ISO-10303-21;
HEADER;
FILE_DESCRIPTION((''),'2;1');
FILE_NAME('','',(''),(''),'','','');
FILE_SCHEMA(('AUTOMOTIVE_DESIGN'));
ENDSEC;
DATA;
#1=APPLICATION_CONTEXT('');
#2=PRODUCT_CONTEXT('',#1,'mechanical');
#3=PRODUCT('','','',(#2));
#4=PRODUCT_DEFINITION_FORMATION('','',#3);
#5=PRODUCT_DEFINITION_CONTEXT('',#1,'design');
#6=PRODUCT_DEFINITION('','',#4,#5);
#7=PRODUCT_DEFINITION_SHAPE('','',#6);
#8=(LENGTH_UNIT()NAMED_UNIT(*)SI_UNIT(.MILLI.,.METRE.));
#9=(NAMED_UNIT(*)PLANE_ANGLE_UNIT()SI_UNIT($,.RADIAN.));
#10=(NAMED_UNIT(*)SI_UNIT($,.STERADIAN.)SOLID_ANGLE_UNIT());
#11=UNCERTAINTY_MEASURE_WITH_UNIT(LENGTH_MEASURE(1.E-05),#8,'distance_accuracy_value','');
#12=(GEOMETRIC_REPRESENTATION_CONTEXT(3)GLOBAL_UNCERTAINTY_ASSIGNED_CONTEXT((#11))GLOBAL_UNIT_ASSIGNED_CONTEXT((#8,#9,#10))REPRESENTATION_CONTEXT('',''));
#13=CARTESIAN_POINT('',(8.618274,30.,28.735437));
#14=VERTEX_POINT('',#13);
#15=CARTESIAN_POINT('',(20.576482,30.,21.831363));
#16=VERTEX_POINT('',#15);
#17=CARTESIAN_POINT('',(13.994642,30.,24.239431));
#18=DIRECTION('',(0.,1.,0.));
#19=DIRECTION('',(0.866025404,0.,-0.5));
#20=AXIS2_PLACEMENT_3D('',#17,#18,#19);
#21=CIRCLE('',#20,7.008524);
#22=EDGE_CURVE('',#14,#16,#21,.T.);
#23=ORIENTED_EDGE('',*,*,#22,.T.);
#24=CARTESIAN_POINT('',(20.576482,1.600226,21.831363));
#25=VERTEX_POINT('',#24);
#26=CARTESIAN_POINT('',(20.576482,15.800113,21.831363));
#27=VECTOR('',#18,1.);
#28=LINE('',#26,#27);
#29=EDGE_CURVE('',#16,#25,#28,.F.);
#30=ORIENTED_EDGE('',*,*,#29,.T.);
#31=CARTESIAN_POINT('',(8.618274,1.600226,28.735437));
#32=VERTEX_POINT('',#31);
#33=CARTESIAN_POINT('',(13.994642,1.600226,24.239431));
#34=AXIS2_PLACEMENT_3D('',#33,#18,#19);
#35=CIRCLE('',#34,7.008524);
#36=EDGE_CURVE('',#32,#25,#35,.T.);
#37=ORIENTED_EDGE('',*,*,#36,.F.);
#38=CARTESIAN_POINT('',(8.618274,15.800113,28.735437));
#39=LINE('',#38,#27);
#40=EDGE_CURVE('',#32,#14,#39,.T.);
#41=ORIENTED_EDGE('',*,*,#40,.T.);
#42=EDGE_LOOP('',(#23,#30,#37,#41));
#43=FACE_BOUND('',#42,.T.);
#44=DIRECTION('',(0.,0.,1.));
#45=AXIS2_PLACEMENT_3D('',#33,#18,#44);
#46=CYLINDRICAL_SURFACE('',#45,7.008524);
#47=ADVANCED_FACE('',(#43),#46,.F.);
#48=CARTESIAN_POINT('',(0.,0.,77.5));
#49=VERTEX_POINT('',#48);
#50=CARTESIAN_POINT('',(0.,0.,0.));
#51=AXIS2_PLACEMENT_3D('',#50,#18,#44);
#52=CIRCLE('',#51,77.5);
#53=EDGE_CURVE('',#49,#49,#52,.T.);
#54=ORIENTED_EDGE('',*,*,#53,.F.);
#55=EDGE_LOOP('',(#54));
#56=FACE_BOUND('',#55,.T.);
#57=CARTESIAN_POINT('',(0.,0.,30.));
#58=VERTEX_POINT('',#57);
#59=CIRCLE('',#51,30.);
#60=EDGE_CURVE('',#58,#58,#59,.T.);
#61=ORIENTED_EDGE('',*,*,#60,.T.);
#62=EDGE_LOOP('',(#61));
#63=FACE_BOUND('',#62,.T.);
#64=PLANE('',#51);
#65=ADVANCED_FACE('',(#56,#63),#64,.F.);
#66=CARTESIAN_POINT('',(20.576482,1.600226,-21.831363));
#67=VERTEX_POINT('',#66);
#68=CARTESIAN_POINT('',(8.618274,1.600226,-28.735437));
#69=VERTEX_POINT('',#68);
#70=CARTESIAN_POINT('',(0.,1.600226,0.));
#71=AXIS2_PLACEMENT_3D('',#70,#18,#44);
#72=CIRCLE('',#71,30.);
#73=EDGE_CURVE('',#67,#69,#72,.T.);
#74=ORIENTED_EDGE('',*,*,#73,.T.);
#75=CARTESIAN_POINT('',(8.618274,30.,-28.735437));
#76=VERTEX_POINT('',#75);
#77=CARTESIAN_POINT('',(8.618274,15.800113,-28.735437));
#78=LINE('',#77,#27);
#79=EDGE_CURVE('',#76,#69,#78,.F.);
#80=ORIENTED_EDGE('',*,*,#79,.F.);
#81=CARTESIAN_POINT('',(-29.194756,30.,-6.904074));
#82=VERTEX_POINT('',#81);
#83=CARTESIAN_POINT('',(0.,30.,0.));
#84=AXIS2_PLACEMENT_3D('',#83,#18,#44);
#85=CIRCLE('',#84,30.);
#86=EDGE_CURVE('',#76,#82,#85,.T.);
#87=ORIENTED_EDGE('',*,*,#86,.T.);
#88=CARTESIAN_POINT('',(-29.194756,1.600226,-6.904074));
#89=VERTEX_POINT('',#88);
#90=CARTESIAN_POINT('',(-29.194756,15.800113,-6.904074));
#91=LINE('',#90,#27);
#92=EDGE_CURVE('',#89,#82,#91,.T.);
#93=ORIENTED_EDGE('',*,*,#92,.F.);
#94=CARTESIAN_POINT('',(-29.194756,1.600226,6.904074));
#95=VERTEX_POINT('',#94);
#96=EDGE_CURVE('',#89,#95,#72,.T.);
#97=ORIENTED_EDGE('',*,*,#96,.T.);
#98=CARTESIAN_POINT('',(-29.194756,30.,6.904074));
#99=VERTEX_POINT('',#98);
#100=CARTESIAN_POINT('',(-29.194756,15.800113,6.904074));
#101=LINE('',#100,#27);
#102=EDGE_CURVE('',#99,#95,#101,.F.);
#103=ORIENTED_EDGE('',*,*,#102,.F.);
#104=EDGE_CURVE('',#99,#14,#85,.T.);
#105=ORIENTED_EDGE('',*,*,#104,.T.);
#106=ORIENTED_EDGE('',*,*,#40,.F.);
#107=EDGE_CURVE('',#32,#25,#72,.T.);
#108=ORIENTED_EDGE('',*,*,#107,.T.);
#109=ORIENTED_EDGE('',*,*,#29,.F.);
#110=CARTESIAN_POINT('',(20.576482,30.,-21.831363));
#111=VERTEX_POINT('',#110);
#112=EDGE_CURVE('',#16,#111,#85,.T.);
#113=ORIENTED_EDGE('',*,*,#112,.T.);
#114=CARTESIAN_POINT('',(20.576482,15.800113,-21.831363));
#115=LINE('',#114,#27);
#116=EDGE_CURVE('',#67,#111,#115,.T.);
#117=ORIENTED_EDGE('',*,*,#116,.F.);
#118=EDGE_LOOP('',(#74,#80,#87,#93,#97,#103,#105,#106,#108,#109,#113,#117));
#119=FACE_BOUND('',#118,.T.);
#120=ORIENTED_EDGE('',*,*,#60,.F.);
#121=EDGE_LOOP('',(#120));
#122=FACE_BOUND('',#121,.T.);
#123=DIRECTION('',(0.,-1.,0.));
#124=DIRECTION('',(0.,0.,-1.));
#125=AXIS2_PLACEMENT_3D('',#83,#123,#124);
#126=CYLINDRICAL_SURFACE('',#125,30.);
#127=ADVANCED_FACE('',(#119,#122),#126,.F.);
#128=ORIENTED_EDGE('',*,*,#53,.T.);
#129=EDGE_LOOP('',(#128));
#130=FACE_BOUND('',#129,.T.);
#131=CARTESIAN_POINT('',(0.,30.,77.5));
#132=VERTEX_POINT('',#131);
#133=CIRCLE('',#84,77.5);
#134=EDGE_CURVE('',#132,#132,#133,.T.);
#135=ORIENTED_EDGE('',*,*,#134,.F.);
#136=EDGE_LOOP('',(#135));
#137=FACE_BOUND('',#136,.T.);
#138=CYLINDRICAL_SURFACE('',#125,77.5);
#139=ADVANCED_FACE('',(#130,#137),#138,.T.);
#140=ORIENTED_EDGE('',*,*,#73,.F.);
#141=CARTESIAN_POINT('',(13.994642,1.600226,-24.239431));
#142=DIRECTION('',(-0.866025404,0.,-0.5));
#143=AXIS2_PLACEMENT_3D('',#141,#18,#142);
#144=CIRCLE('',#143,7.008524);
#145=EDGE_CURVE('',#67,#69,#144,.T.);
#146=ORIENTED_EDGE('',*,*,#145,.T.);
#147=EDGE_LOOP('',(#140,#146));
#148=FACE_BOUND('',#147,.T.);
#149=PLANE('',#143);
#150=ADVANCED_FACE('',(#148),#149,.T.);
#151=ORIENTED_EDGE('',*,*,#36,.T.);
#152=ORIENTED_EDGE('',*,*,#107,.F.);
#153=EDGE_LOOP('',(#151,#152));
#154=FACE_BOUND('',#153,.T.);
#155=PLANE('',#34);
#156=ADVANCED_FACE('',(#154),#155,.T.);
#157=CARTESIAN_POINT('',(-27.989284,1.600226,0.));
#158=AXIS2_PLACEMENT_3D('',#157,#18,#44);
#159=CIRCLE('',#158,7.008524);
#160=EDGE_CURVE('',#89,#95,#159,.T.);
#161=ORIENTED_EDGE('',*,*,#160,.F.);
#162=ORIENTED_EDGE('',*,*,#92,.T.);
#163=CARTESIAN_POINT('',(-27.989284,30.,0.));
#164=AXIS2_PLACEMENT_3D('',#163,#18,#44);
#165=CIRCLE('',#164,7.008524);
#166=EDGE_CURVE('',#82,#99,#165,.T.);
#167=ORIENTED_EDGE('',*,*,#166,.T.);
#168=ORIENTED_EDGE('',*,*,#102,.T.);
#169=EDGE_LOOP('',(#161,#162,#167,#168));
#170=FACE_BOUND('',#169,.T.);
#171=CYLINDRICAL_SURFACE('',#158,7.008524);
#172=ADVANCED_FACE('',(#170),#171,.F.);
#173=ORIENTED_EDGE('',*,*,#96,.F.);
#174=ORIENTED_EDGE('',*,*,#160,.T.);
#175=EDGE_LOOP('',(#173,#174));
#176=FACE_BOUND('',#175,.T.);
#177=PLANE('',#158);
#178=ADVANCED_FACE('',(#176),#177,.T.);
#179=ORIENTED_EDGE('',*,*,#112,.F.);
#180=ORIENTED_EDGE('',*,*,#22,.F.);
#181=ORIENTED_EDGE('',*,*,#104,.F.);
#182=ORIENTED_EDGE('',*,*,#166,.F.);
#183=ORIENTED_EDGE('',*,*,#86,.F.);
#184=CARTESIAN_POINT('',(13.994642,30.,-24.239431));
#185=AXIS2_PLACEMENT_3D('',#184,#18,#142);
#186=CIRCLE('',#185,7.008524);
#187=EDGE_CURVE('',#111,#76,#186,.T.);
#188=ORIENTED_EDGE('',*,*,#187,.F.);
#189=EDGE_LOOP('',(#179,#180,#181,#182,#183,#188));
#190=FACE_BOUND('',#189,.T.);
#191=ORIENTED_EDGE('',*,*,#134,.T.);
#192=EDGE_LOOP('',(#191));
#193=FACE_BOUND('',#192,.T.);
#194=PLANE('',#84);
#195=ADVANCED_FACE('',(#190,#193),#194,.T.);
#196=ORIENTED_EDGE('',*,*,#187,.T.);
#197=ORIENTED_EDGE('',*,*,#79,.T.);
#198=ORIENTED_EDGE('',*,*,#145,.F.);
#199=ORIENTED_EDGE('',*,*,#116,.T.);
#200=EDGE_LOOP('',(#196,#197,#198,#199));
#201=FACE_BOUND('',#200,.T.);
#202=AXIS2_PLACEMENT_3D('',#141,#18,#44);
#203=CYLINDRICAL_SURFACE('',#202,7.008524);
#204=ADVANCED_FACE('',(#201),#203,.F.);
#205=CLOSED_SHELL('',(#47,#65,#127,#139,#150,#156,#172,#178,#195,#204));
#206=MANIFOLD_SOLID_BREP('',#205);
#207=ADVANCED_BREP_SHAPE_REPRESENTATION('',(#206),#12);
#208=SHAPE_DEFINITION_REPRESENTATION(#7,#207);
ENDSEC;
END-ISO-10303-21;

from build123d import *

# Parameters (mm, degrees)
SKETCH1_R           = 77.5
BOSS_EXTRUDE1_DEPTH = 30
SKETCH2_R           = 30
CUT_EXTRUDE1_DEPTH  = 114.633181774
SKETCH3_R           = 7.008523817
CUT_EXTRUDE2_DEPTH  = 28.39977362
CIRPATTERN1_COUNT   = 3


with BuildPart() as part:
    # Sketch1 → Boss-Extrude1 (new body)
    with BuildSketch(Plane(origin=(0, 0, 0), x_dir=(1, 0, 0), z_dir=(0, 1, 0))):
        Circle(SKETCH1_R)
    extrude(amount=BOSS_EXTRUDE1_DEPTH)

    # Sketch2 → Cut-Extrude1 (cut, through all)
    with BuildSketch(Plane(origin=(0, 0, 0), x_dir=(1, 0, 0), z_dir=(0, 1, 0))):
        Circle(SKETCH2_R)
    extrude(amount=CUT_EXTRUDE1_DEPTH, mode=Mode.SUBTRACT)

    # Sketch3 → Cut-Extrude2 (cut)
    with BuildSketch(Plane(origin=(0, 30, 0), x_dir=(1, 0, 0), z_dir=(0, 1, 0))):
        with Locations((-27.989283613, 0)):
            Circle(SKETCH3_R)
    cut_extrude2 = extrude(amount=-CUT_EXTRUDE2_DEPTH, mode=Mode.SUBTRACT)

    # CirPattern1: Cut-Extrude2 ×3 about axis
    cirpattern1_axis = Axis((0, 0, 0), (0, 1, 0))
    for i in range(1, CIRPATTERN1_COUNT):
        add(cut_extrude2.rotate(cirpattern1_axis, i * 360 / CIRPATTERN1_COUNT), mode=Mode.SUBTRACT)


solid = part.part
